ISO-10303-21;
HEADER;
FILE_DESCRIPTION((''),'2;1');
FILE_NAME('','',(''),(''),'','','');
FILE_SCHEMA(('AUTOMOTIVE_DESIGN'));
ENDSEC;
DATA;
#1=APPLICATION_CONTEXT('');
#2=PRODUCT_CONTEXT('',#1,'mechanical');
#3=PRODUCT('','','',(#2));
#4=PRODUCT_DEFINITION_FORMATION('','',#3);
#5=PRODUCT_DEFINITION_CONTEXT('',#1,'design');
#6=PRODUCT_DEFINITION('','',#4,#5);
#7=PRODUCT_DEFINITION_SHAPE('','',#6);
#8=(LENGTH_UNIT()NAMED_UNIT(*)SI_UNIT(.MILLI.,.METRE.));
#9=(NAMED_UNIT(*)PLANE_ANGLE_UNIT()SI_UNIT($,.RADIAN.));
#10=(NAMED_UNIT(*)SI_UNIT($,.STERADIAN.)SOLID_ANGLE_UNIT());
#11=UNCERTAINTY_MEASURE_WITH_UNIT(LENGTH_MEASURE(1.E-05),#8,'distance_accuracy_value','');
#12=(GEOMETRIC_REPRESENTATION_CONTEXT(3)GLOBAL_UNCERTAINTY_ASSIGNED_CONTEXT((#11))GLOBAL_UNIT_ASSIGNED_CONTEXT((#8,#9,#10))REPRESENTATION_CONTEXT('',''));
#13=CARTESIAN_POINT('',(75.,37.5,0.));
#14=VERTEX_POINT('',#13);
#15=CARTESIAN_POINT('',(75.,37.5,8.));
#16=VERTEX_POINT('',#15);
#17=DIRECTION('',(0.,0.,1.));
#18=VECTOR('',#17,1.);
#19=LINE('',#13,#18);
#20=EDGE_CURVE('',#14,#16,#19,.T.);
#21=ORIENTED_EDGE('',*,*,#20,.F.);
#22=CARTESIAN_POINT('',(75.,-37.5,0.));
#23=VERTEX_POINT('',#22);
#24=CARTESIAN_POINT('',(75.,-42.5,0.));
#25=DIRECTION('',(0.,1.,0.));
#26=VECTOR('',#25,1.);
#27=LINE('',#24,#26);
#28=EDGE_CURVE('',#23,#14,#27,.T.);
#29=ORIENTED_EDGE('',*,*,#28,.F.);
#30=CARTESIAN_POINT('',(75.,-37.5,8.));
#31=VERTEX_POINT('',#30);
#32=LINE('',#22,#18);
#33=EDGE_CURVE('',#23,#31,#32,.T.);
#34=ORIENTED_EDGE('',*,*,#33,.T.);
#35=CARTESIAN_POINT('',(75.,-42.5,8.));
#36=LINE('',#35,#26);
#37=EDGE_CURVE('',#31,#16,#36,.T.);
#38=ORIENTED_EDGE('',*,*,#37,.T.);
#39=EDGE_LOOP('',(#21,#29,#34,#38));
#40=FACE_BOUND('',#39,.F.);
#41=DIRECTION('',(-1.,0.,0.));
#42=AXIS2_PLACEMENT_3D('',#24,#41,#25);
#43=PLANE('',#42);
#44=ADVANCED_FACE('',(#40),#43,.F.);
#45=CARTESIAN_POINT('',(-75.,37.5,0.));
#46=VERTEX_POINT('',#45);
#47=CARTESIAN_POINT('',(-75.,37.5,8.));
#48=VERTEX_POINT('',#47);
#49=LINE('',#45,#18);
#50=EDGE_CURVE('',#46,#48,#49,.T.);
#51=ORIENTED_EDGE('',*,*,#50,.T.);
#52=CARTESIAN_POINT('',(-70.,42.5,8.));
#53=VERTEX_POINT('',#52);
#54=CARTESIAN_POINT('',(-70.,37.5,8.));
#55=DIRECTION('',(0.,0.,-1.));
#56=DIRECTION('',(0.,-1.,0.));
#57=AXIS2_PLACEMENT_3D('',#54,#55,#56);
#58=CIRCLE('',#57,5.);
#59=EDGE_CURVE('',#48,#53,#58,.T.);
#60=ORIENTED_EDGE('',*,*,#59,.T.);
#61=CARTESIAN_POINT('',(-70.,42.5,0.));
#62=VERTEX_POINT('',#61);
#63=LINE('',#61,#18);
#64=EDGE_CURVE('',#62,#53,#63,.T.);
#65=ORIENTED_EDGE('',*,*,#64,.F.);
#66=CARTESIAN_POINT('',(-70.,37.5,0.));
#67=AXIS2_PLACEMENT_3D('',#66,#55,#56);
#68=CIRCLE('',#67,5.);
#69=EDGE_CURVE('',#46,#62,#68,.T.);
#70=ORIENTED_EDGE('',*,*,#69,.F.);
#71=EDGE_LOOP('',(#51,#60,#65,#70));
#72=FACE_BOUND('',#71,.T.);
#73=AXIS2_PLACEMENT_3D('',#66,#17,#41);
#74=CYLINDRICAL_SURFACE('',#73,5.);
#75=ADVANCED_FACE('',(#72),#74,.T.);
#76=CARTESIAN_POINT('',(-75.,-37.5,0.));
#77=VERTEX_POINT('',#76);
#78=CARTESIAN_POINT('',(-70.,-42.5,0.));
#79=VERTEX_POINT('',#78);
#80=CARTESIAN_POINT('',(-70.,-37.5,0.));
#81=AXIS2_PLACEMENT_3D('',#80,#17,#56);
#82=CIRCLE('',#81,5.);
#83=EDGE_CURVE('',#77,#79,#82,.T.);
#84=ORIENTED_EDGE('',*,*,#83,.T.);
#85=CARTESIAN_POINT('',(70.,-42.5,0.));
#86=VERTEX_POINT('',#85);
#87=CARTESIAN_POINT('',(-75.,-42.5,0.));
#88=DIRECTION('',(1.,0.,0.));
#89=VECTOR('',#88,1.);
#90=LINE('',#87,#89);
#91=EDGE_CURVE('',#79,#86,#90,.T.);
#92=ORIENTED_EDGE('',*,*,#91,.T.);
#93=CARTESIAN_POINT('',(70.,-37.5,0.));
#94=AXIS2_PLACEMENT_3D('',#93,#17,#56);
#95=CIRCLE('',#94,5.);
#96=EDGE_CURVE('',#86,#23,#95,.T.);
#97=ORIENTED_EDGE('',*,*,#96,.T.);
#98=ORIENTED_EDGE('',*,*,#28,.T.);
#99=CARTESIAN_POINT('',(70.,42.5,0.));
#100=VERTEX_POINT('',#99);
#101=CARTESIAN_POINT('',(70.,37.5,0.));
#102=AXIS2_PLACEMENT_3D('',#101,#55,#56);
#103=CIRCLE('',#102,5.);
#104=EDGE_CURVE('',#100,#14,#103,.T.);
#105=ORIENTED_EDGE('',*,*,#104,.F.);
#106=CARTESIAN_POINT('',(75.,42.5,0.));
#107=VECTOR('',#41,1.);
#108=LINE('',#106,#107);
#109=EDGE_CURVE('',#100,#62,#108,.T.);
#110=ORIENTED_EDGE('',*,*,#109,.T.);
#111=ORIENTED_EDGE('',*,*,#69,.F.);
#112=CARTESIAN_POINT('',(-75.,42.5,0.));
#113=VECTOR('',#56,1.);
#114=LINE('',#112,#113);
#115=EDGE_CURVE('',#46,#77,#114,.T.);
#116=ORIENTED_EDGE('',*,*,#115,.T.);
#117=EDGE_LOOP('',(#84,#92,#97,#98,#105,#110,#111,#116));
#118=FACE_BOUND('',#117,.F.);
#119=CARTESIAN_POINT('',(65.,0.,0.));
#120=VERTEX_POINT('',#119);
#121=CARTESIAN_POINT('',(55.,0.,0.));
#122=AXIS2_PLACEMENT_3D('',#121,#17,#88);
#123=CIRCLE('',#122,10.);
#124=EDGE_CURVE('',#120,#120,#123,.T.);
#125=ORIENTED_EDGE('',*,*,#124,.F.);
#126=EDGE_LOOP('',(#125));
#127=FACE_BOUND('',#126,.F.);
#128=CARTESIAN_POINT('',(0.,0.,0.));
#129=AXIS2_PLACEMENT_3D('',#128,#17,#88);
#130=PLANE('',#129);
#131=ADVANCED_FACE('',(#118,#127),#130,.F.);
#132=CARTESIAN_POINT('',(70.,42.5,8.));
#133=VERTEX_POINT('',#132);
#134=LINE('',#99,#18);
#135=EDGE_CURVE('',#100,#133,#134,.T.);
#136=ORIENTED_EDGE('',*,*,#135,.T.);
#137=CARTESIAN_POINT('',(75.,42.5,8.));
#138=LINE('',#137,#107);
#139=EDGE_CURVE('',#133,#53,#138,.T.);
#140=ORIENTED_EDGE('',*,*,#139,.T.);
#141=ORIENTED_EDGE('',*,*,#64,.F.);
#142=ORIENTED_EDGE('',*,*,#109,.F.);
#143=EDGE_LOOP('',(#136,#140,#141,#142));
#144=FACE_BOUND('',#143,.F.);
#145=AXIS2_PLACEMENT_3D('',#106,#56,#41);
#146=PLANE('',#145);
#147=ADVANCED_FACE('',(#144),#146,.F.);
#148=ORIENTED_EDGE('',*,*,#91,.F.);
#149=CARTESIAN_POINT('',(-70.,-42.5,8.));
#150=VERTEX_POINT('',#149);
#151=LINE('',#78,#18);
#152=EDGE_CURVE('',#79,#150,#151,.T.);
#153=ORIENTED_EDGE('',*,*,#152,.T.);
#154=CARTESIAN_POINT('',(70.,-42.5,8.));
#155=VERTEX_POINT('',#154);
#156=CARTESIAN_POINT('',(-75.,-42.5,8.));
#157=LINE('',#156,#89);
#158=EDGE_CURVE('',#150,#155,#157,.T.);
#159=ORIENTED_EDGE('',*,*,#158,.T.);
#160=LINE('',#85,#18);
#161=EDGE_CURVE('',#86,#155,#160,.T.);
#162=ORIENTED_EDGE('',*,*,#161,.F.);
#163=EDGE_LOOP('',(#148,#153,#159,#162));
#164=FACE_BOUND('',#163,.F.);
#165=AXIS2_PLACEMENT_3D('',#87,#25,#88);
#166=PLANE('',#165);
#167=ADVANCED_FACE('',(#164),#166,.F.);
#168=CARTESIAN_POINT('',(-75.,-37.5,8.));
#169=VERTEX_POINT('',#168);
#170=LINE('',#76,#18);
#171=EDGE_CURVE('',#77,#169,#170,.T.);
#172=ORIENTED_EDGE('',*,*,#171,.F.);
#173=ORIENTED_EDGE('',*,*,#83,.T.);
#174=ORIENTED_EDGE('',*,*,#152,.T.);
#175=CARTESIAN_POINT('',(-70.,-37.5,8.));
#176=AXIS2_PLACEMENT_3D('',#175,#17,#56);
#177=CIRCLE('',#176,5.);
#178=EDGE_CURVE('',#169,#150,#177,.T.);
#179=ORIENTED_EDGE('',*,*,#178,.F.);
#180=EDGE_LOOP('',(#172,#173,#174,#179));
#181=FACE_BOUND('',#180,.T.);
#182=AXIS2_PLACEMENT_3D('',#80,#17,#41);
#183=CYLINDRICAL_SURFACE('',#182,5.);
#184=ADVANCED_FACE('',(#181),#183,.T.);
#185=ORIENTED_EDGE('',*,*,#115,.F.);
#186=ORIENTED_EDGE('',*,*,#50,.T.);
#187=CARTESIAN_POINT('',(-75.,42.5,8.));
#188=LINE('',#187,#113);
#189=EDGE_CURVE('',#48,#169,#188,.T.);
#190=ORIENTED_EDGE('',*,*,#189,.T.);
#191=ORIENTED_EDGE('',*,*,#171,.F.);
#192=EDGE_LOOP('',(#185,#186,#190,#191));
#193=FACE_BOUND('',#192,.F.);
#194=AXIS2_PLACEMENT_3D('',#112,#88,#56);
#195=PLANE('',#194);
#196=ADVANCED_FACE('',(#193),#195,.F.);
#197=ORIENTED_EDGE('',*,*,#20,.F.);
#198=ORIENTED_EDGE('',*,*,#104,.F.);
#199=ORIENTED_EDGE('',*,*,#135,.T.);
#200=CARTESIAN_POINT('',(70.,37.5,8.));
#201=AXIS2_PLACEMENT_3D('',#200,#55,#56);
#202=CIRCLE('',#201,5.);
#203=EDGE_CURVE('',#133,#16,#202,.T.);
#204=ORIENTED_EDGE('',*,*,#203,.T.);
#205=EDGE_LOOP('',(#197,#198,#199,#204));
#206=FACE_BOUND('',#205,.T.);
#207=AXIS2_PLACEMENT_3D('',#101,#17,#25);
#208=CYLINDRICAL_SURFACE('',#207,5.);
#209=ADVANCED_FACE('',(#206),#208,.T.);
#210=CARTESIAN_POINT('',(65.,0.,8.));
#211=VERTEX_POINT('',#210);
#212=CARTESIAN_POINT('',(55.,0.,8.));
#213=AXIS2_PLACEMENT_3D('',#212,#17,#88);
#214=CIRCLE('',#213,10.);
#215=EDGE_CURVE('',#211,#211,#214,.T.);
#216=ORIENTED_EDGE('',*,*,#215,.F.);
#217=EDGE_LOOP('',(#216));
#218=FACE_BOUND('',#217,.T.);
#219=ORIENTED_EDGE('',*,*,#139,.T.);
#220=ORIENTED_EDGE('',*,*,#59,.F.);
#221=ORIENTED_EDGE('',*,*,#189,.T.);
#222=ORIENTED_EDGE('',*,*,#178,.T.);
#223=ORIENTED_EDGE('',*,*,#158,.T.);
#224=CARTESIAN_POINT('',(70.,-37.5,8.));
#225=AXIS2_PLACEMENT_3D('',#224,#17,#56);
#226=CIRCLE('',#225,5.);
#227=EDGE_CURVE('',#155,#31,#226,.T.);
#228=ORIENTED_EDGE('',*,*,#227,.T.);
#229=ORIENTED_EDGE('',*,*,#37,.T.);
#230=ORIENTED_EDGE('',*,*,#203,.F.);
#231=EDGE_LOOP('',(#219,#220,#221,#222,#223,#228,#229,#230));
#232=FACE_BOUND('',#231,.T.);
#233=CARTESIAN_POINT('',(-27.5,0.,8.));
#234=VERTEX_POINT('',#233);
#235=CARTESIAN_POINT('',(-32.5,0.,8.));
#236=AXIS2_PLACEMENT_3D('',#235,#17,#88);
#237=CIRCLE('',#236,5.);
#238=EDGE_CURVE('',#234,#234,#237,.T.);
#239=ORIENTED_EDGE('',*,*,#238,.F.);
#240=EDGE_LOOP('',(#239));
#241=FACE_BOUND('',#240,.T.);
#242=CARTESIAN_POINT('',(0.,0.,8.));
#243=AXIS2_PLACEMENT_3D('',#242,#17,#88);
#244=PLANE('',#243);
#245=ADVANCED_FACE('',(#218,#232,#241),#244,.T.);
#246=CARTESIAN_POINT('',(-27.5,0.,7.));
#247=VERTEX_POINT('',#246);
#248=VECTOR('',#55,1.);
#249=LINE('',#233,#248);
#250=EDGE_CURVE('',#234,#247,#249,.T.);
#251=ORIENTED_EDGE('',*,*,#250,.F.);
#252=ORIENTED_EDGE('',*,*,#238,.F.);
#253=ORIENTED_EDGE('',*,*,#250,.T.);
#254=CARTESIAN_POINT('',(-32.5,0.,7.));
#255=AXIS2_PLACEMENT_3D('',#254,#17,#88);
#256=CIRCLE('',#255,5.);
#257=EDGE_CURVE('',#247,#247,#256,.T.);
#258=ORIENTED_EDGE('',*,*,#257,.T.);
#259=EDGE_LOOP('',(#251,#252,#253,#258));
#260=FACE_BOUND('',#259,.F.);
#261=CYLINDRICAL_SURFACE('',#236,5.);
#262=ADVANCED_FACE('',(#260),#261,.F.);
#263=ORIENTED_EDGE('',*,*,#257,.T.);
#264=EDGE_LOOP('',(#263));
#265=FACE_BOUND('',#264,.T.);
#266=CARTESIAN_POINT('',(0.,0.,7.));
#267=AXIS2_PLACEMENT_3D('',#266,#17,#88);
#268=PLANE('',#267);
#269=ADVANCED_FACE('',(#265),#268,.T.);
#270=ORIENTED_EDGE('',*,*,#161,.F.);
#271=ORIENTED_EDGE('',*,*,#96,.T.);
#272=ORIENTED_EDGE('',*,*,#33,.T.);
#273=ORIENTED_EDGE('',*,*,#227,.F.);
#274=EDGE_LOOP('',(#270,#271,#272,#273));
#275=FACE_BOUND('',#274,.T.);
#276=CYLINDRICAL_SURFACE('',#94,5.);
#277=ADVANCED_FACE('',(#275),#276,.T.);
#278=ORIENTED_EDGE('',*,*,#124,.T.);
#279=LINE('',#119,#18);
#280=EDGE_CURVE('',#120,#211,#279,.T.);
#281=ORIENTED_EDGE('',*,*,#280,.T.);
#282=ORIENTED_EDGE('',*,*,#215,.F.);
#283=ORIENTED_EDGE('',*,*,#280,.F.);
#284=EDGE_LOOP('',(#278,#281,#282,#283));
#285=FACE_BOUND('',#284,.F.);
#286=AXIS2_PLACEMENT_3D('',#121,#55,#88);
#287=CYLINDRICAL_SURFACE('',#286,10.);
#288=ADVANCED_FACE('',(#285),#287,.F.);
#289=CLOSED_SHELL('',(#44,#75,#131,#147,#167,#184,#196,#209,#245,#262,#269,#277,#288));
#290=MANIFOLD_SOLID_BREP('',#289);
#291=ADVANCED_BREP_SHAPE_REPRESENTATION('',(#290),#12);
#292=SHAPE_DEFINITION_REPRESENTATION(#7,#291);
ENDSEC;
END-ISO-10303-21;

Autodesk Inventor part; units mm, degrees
ref_plane "YZ Plane" through (0, 0, 0) normal (1, 0, 0) x (0, 1, 0)
ref_plane "XZ Plane" through (0, 0, 0) normal (0, 1, 0) x (-1, 0, 0)
ref_plane "XY Plane" through (0, 0, 0) normal (0, 0, 1) x (1, 0, 0)
sketch "Sketch1" plane through (0, 0, 0) normal (0, 0, 1) x (1, 0, 0)
  line L0 (-75, -42.5) -> (75, -42.5)
  line L1 (75, -42.5) -> (75, 42.5)
  line L2 (75, 42.5) -> (-75, 42.5)
  line L3 (-75, 42.5) -> (-75, -42.5)
  line L4 (-75, -42.5) -> (75, 42.5) construction
  line L5 (75, -42.5) -> (-75, 42.5) construction
  circle A0 centre (55, -22.5) radius 10
  circle A1 centre (55, 22.5) radius 10
  line L6 (0, 0) -> (75, 0) construction
  circle A2 centre (55, 0) radius 10
  dimension "d0" = 150
  dimension "d1" = 85
  dimension "d23" = 20
  dimension "d25" = 20
  dimension "d26" = 20
extrude "Plate1" add sketch "Sketch1" along normal blind 8 contours L3 L2 L1 L0 | A0 | A1
fillet "Corner Round1" radius 5 4 edges at (75, -42.5, 4) (-75, -42.5, 4) (-75, 42.5, 4) (75, 42.5, 4)
sketch "Sketch5" plane through (0, 0, 8) normal (0, 0, 1) x (1, 0, 0)
  line L0 (70, -42.5) -> (-70, -42.5) projected
  line L1 (-75, -37.5) -> (-75, 37.5) projected
  line L2 (-70, 42.5) -> (70, 42.5) projected
  circle A0 centre (-32.5, 0) radius 42.5
  circle A1 centre (-32.5, 0) radius 5
  point P0 (0, 0)
  dimension "d27" = 10
extrude "Extrusion2" cut sketch "Sketch5" against normal blind 1 contours A1
equation "\"d26\" = d25"
equation "\"d2\" = Thickness"
equation "\"BendReliefWidth\" = Thickness"
equation "\"BendReliefDepth\" = 0.5 * Thickness"
equation "\"CornerReliefSize\" = 4 * Thickness"
equation "\"MinimumRemnant\" = 2 * Thickness"
equation "\"TransitionRadius\" = BendRadius"
equation "\"JacobiRadiusSize\" = BendRadius"
equation "\"GapSize\" = Thickness"
equation "\"Thickness\" = 8"
equation "\"BendRadius\" = 5"
properties part number "PNS 1783 leg floor plate" material "Steel"
